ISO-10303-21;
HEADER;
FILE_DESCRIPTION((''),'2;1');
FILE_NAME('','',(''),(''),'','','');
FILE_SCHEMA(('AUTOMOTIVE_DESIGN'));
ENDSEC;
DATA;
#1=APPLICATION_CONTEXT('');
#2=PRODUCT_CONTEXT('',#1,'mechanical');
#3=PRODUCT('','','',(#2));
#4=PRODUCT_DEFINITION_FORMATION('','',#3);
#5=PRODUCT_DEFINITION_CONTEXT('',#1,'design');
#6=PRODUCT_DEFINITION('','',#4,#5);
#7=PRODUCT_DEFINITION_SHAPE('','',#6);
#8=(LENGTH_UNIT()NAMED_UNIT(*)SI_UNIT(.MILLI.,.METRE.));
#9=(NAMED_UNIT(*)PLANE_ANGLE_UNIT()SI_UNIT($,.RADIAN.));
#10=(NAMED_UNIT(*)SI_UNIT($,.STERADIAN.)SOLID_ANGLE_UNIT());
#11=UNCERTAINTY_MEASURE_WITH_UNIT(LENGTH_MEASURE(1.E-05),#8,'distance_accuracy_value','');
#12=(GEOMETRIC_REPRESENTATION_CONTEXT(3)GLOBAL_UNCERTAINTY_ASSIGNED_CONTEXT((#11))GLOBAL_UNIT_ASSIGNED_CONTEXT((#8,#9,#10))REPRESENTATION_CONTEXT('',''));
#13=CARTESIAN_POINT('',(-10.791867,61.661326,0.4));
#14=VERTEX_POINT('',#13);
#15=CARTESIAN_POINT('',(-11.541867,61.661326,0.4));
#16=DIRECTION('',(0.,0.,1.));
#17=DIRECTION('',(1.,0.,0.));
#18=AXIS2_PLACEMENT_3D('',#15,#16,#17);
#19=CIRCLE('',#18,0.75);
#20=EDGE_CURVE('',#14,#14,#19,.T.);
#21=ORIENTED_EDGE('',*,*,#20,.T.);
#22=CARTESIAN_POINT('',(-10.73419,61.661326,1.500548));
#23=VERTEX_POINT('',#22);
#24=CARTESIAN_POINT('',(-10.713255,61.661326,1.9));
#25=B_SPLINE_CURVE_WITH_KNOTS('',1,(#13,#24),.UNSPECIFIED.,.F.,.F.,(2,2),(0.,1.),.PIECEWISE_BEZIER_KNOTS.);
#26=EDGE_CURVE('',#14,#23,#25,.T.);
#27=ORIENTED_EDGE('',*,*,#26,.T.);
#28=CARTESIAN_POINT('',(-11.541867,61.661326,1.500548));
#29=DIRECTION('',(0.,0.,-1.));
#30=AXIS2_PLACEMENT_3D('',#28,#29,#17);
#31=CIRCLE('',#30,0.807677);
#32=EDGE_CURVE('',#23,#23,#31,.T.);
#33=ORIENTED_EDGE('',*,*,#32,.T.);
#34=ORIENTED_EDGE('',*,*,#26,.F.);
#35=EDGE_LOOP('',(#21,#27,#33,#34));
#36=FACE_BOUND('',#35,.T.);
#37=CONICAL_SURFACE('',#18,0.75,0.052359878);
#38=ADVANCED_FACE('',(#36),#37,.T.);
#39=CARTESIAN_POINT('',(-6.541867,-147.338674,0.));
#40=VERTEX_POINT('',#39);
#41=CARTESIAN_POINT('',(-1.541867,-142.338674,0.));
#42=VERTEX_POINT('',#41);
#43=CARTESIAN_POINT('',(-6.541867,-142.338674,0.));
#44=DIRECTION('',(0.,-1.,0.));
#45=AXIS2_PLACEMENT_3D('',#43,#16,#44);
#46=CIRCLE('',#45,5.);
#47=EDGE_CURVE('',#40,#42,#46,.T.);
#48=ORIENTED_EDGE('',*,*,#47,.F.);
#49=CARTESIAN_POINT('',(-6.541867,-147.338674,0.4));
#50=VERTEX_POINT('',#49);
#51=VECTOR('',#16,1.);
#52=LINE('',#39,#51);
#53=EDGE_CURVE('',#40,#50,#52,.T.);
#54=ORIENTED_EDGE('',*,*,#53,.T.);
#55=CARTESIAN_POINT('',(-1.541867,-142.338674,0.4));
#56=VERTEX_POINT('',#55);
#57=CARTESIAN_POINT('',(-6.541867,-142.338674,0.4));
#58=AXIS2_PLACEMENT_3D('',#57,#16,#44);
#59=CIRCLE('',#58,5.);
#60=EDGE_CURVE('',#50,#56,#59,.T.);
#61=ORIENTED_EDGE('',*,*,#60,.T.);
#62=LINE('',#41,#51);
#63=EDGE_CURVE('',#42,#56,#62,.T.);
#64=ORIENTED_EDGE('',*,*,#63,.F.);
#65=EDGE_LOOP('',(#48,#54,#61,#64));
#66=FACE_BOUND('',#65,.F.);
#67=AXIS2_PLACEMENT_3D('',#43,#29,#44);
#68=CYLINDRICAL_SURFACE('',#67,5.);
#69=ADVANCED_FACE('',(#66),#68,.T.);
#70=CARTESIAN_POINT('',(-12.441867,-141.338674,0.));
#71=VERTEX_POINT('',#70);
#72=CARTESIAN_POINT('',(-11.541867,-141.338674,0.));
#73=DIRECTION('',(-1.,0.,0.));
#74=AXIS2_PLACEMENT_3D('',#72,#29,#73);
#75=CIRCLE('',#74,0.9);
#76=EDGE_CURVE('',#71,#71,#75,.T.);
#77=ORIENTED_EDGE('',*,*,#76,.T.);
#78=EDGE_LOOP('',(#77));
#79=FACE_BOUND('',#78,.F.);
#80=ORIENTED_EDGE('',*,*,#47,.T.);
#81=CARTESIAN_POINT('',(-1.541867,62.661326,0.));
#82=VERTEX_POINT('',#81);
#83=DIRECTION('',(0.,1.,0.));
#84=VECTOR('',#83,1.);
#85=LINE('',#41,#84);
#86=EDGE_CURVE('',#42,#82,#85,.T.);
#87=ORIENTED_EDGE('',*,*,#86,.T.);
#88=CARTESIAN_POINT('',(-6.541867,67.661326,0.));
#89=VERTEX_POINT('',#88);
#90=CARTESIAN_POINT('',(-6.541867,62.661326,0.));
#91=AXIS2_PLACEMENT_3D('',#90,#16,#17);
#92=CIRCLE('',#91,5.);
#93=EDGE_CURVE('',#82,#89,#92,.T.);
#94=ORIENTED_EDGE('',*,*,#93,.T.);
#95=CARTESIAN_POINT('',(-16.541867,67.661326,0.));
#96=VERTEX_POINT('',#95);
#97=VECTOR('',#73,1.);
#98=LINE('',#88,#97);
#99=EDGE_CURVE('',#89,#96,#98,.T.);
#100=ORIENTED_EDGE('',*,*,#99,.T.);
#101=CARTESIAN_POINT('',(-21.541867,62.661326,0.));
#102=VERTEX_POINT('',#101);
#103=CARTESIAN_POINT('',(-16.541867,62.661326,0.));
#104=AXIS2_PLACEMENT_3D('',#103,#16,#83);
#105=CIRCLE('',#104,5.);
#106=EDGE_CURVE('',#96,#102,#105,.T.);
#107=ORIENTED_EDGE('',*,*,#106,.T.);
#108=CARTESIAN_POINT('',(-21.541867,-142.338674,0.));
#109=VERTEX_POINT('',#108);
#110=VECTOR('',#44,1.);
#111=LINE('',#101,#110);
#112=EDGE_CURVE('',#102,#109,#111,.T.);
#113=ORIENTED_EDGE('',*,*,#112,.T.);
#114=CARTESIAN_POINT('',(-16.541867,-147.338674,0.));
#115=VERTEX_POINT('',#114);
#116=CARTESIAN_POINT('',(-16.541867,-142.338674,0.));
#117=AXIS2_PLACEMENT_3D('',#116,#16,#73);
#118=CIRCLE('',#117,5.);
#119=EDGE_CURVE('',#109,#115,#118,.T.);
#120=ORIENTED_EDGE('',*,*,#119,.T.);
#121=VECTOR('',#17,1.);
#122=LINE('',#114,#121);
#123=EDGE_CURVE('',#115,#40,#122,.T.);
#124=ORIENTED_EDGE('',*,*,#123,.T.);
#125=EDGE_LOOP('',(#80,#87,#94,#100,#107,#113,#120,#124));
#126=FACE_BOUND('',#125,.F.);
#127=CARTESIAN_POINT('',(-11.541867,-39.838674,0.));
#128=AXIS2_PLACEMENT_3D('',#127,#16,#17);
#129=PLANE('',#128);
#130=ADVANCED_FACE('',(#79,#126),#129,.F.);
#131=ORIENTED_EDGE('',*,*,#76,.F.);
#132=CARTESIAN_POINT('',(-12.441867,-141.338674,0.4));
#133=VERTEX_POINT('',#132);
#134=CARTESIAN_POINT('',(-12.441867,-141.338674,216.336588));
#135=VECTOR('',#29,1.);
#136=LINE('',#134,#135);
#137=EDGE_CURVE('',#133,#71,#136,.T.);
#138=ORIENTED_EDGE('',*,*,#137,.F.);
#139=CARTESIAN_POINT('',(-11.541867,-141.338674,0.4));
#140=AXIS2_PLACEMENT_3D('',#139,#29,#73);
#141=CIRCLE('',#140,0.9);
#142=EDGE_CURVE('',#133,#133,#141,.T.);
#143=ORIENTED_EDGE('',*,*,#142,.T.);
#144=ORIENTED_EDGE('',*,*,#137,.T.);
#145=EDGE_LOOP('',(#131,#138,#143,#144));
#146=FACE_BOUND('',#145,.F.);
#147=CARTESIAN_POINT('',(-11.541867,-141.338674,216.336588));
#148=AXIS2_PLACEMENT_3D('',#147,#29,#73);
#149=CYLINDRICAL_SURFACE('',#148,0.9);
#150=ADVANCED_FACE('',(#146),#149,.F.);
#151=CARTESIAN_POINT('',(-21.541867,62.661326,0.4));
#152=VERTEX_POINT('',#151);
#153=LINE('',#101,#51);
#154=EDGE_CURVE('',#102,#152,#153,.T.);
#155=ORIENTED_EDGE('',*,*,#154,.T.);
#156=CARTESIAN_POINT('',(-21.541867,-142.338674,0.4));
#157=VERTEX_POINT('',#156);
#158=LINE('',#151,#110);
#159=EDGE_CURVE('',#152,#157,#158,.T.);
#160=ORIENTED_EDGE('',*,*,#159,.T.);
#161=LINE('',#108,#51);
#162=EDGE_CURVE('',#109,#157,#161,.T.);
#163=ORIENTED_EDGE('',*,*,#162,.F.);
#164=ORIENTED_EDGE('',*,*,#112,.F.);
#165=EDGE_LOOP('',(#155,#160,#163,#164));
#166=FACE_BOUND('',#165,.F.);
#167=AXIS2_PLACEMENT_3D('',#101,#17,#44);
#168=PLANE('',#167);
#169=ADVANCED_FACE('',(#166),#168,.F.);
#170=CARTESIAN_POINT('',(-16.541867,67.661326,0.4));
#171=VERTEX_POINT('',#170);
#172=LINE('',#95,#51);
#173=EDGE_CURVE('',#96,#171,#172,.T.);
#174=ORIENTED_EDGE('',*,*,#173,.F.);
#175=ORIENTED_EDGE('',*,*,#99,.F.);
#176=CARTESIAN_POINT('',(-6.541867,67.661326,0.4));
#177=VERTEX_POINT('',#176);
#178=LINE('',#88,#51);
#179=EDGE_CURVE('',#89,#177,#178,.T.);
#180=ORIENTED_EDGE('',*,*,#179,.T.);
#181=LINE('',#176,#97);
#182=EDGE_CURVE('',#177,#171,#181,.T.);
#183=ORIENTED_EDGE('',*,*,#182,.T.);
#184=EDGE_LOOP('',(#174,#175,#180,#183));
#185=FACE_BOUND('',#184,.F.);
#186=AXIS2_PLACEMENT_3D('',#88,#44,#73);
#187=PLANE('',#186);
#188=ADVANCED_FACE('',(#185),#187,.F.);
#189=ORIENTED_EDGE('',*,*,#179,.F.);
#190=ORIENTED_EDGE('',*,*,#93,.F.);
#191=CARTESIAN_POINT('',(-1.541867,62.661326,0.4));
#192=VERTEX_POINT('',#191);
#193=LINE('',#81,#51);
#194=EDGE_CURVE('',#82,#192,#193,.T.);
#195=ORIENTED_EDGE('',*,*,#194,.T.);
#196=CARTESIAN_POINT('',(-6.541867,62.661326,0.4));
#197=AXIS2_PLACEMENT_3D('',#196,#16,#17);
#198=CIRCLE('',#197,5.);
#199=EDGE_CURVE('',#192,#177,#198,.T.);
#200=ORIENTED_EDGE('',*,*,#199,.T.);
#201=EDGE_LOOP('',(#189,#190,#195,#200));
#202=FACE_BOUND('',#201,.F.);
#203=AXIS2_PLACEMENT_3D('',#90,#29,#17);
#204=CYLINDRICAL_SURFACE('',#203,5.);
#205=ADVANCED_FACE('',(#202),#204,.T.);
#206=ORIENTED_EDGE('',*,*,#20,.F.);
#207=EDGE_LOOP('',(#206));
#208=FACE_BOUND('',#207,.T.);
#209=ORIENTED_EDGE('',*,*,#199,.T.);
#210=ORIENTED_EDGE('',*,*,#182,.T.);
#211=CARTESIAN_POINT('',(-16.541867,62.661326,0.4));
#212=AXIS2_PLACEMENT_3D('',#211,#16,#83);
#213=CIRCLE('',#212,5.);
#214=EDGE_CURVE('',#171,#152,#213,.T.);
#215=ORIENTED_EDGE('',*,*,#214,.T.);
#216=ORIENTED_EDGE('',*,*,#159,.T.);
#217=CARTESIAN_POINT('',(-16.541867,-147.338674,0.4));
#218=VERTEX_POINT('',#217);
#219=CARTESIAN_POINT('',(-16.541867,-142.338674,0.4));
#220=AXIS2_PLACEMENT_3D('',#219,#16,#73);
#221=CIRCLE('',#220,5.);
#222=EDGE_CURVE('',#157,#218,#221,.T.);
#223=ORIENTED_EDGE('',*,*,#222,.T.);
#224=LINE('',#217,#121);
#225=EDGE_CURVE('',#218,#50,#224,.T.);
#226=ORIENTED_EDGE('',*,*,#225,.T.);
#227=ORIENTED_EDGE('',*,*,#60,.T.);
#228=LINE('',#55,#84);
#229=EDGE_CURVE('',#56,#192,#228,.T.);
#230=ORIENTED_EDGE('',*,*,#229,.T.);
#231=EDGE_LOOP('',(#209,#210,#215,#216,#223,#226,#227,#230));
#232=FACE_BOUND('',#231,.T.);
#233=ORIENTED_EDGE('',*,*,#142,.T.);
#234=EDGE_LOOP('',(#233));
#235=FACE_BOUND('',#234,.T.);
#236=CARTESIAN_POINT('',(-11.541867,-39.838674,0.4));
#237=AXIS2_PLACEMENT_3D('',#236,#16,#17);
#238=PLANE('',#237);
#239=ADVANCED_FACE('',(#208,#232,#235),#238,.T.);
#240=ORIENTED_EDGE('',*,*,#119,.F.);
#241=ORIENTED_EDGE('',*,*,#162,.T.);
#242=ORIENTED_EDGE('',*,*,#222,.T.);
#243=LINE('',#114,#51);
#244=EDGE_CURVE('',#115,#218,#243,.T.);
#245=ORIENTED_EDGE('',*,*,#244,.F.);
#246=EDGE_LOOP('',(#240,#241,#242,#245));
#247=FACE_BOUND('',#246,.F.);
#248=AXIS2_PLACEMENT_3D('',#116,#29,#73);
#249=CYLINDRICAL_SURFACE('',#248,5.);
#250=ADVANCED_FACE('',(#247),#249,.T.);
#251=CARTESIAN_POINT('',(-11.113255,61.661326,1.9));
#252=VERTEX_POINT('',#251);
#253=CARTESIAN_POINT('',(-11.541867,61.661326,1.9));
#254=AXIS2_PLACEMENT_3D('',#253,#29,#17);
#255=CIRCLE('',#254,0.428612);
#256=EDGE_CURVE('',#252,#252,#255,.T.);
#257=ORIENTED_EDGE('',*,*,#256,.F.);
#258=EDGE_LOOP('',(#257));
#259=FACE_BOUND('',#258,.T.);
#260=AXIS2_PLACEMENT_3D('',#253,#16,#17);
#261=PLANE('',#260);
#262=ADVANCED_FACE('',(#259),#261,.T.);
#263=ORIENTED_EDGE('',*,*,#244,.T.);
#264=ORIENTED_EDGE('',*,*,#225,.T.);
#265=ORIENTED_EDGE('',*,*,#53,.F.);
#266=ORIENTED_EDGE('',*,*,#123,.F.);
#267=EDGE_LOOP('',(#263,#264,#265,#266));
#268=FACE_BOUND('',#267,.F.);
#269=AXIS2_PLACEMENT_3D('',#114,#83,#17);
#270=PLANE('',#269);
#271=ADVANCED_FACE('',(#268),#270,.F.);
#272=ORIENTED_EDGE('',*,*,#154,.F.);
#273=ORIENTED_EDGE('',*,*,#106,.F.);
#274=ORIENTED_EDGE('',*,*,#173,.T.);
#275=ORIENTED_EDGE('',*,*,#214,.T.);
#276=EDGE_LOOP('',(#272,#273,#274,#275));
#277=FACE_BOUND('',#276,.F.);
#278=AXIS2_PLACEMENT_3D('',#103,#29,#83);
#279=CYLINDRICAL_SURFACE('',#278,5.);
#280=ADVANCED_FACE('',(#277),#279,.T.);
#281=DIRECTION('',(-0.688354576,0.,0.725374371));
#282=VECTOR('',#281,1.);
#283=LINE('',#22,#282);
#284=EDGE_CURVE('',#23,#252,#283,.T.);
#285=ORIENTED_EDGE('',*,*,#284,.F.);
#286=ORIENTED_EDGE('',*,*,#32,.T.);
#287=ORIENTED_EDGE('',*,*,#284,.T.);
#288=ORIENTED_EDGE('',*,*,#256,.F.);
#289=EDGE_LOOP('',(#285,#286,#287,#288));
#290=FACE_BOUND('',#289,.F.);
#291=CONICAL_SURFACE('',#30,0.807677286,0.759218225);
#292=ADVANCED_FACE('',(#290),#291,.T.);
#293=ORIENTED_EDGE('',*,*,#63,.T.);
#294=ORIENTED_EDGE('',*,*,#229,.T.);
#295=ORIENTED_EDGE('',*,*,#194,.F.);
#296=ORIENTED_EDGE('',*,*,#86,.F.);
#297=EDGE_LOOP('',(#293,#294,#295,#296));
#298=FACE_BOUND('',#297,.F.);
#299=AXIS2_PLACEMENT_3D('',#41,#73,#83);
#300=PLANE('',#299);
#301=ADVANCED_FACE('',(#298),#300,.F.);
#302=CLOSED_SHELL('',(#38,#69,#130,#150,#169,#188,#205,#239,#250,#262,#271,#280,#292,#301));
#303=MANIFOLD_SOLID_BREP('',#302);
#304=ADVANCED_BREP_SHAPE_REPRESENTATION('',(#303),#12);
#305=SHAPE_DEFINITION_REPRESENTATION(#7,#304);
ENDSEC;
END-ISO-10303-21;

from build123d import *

# Parameters (mm, degrees)
F1_DEPTH = 0.4
F2_R     = 0.75
F3_DEPTH = 1.5
F3_TAPER = -3
F5_D     = 1.8


# Not quite as in the source:
# - a fillet or chamfer that OpenCascade refuses, or shapes differently, is made with other operations: its cross-section is extruded or revolved along the edge and cut away or added


with BuildPart() as f1:
    # F0 (on Top) → F1 (new body)
    with BuildSketch(Plane.XY):
        with BuildLine():
            Line((-6.5418671444, 67.6613259315), (-16.5418671444, 67.6613259315))
            ThreePointArc((-16.5418671444, 67.6613259315), (-20.0774010503, 66.1968598375), (-21.5418671444, 62.6613259315))
            Line((-21.5418671444, 62.6613259315), (-21.5418671444, -142.3386740685))
            ThreePointArc((-21.5418671444, -142.3386740685), (-20.0774010503, -145.8742079744), (-16.5418671444, -147.3386740685))
            Line((-16.5418671444, -147.3386740685), (-6.5418671444, -147.3386740685))
            ThreePointArc((-6.5418671444, -147.3386740685), (-3.0063332385, -145.8742079744), (-1.5418671444, -142.3386740685))
            Line((-1.5418671444, -142.3386740685), (-1.5418671444, 62.6613259315))
            ThreePointArc((-1.5418671444, 62.6613259315), (-3.0063332385, 66.1968598375), (-6.5418671444, 67.6613259315))
        make_face()
    extrude(amount=F1_DEPTH)

    # F2 (on face) → F3 (join)
    with BuildSketch(Plane.XY.offset(0.4)):
        with Locations((-11.5418671444, 61.6613259315)):
            Circle(F2_R)
    extrude(amount=F3_DEPTH, taper=F3_TAPER)

    # F4: chamfer of 0.4 on 1 edges, made by hand

    # F4_s1 → F4_t2 (revolve, cut)
    with BuildSketch(Plane.XZ.offset(-61.6613259315)):
        Polygon((-10.734189858, 1.5005481861), (-11.1132554755, 1.9), (-10.7132554755, 1.9), align=None)
    revolve(axis=Axis((-11.5418671444, 61.6613259315, 1.9), (0, 0, -1)), mode=Mode.SUBTRACT)

    # F5 (through all)
    with Locations(Plane.XY.offset(0.4)):
        with Locations((-11.5418671444, -141.3386740685)):
            Hole(F5_D / 2)


solid = f1.part
